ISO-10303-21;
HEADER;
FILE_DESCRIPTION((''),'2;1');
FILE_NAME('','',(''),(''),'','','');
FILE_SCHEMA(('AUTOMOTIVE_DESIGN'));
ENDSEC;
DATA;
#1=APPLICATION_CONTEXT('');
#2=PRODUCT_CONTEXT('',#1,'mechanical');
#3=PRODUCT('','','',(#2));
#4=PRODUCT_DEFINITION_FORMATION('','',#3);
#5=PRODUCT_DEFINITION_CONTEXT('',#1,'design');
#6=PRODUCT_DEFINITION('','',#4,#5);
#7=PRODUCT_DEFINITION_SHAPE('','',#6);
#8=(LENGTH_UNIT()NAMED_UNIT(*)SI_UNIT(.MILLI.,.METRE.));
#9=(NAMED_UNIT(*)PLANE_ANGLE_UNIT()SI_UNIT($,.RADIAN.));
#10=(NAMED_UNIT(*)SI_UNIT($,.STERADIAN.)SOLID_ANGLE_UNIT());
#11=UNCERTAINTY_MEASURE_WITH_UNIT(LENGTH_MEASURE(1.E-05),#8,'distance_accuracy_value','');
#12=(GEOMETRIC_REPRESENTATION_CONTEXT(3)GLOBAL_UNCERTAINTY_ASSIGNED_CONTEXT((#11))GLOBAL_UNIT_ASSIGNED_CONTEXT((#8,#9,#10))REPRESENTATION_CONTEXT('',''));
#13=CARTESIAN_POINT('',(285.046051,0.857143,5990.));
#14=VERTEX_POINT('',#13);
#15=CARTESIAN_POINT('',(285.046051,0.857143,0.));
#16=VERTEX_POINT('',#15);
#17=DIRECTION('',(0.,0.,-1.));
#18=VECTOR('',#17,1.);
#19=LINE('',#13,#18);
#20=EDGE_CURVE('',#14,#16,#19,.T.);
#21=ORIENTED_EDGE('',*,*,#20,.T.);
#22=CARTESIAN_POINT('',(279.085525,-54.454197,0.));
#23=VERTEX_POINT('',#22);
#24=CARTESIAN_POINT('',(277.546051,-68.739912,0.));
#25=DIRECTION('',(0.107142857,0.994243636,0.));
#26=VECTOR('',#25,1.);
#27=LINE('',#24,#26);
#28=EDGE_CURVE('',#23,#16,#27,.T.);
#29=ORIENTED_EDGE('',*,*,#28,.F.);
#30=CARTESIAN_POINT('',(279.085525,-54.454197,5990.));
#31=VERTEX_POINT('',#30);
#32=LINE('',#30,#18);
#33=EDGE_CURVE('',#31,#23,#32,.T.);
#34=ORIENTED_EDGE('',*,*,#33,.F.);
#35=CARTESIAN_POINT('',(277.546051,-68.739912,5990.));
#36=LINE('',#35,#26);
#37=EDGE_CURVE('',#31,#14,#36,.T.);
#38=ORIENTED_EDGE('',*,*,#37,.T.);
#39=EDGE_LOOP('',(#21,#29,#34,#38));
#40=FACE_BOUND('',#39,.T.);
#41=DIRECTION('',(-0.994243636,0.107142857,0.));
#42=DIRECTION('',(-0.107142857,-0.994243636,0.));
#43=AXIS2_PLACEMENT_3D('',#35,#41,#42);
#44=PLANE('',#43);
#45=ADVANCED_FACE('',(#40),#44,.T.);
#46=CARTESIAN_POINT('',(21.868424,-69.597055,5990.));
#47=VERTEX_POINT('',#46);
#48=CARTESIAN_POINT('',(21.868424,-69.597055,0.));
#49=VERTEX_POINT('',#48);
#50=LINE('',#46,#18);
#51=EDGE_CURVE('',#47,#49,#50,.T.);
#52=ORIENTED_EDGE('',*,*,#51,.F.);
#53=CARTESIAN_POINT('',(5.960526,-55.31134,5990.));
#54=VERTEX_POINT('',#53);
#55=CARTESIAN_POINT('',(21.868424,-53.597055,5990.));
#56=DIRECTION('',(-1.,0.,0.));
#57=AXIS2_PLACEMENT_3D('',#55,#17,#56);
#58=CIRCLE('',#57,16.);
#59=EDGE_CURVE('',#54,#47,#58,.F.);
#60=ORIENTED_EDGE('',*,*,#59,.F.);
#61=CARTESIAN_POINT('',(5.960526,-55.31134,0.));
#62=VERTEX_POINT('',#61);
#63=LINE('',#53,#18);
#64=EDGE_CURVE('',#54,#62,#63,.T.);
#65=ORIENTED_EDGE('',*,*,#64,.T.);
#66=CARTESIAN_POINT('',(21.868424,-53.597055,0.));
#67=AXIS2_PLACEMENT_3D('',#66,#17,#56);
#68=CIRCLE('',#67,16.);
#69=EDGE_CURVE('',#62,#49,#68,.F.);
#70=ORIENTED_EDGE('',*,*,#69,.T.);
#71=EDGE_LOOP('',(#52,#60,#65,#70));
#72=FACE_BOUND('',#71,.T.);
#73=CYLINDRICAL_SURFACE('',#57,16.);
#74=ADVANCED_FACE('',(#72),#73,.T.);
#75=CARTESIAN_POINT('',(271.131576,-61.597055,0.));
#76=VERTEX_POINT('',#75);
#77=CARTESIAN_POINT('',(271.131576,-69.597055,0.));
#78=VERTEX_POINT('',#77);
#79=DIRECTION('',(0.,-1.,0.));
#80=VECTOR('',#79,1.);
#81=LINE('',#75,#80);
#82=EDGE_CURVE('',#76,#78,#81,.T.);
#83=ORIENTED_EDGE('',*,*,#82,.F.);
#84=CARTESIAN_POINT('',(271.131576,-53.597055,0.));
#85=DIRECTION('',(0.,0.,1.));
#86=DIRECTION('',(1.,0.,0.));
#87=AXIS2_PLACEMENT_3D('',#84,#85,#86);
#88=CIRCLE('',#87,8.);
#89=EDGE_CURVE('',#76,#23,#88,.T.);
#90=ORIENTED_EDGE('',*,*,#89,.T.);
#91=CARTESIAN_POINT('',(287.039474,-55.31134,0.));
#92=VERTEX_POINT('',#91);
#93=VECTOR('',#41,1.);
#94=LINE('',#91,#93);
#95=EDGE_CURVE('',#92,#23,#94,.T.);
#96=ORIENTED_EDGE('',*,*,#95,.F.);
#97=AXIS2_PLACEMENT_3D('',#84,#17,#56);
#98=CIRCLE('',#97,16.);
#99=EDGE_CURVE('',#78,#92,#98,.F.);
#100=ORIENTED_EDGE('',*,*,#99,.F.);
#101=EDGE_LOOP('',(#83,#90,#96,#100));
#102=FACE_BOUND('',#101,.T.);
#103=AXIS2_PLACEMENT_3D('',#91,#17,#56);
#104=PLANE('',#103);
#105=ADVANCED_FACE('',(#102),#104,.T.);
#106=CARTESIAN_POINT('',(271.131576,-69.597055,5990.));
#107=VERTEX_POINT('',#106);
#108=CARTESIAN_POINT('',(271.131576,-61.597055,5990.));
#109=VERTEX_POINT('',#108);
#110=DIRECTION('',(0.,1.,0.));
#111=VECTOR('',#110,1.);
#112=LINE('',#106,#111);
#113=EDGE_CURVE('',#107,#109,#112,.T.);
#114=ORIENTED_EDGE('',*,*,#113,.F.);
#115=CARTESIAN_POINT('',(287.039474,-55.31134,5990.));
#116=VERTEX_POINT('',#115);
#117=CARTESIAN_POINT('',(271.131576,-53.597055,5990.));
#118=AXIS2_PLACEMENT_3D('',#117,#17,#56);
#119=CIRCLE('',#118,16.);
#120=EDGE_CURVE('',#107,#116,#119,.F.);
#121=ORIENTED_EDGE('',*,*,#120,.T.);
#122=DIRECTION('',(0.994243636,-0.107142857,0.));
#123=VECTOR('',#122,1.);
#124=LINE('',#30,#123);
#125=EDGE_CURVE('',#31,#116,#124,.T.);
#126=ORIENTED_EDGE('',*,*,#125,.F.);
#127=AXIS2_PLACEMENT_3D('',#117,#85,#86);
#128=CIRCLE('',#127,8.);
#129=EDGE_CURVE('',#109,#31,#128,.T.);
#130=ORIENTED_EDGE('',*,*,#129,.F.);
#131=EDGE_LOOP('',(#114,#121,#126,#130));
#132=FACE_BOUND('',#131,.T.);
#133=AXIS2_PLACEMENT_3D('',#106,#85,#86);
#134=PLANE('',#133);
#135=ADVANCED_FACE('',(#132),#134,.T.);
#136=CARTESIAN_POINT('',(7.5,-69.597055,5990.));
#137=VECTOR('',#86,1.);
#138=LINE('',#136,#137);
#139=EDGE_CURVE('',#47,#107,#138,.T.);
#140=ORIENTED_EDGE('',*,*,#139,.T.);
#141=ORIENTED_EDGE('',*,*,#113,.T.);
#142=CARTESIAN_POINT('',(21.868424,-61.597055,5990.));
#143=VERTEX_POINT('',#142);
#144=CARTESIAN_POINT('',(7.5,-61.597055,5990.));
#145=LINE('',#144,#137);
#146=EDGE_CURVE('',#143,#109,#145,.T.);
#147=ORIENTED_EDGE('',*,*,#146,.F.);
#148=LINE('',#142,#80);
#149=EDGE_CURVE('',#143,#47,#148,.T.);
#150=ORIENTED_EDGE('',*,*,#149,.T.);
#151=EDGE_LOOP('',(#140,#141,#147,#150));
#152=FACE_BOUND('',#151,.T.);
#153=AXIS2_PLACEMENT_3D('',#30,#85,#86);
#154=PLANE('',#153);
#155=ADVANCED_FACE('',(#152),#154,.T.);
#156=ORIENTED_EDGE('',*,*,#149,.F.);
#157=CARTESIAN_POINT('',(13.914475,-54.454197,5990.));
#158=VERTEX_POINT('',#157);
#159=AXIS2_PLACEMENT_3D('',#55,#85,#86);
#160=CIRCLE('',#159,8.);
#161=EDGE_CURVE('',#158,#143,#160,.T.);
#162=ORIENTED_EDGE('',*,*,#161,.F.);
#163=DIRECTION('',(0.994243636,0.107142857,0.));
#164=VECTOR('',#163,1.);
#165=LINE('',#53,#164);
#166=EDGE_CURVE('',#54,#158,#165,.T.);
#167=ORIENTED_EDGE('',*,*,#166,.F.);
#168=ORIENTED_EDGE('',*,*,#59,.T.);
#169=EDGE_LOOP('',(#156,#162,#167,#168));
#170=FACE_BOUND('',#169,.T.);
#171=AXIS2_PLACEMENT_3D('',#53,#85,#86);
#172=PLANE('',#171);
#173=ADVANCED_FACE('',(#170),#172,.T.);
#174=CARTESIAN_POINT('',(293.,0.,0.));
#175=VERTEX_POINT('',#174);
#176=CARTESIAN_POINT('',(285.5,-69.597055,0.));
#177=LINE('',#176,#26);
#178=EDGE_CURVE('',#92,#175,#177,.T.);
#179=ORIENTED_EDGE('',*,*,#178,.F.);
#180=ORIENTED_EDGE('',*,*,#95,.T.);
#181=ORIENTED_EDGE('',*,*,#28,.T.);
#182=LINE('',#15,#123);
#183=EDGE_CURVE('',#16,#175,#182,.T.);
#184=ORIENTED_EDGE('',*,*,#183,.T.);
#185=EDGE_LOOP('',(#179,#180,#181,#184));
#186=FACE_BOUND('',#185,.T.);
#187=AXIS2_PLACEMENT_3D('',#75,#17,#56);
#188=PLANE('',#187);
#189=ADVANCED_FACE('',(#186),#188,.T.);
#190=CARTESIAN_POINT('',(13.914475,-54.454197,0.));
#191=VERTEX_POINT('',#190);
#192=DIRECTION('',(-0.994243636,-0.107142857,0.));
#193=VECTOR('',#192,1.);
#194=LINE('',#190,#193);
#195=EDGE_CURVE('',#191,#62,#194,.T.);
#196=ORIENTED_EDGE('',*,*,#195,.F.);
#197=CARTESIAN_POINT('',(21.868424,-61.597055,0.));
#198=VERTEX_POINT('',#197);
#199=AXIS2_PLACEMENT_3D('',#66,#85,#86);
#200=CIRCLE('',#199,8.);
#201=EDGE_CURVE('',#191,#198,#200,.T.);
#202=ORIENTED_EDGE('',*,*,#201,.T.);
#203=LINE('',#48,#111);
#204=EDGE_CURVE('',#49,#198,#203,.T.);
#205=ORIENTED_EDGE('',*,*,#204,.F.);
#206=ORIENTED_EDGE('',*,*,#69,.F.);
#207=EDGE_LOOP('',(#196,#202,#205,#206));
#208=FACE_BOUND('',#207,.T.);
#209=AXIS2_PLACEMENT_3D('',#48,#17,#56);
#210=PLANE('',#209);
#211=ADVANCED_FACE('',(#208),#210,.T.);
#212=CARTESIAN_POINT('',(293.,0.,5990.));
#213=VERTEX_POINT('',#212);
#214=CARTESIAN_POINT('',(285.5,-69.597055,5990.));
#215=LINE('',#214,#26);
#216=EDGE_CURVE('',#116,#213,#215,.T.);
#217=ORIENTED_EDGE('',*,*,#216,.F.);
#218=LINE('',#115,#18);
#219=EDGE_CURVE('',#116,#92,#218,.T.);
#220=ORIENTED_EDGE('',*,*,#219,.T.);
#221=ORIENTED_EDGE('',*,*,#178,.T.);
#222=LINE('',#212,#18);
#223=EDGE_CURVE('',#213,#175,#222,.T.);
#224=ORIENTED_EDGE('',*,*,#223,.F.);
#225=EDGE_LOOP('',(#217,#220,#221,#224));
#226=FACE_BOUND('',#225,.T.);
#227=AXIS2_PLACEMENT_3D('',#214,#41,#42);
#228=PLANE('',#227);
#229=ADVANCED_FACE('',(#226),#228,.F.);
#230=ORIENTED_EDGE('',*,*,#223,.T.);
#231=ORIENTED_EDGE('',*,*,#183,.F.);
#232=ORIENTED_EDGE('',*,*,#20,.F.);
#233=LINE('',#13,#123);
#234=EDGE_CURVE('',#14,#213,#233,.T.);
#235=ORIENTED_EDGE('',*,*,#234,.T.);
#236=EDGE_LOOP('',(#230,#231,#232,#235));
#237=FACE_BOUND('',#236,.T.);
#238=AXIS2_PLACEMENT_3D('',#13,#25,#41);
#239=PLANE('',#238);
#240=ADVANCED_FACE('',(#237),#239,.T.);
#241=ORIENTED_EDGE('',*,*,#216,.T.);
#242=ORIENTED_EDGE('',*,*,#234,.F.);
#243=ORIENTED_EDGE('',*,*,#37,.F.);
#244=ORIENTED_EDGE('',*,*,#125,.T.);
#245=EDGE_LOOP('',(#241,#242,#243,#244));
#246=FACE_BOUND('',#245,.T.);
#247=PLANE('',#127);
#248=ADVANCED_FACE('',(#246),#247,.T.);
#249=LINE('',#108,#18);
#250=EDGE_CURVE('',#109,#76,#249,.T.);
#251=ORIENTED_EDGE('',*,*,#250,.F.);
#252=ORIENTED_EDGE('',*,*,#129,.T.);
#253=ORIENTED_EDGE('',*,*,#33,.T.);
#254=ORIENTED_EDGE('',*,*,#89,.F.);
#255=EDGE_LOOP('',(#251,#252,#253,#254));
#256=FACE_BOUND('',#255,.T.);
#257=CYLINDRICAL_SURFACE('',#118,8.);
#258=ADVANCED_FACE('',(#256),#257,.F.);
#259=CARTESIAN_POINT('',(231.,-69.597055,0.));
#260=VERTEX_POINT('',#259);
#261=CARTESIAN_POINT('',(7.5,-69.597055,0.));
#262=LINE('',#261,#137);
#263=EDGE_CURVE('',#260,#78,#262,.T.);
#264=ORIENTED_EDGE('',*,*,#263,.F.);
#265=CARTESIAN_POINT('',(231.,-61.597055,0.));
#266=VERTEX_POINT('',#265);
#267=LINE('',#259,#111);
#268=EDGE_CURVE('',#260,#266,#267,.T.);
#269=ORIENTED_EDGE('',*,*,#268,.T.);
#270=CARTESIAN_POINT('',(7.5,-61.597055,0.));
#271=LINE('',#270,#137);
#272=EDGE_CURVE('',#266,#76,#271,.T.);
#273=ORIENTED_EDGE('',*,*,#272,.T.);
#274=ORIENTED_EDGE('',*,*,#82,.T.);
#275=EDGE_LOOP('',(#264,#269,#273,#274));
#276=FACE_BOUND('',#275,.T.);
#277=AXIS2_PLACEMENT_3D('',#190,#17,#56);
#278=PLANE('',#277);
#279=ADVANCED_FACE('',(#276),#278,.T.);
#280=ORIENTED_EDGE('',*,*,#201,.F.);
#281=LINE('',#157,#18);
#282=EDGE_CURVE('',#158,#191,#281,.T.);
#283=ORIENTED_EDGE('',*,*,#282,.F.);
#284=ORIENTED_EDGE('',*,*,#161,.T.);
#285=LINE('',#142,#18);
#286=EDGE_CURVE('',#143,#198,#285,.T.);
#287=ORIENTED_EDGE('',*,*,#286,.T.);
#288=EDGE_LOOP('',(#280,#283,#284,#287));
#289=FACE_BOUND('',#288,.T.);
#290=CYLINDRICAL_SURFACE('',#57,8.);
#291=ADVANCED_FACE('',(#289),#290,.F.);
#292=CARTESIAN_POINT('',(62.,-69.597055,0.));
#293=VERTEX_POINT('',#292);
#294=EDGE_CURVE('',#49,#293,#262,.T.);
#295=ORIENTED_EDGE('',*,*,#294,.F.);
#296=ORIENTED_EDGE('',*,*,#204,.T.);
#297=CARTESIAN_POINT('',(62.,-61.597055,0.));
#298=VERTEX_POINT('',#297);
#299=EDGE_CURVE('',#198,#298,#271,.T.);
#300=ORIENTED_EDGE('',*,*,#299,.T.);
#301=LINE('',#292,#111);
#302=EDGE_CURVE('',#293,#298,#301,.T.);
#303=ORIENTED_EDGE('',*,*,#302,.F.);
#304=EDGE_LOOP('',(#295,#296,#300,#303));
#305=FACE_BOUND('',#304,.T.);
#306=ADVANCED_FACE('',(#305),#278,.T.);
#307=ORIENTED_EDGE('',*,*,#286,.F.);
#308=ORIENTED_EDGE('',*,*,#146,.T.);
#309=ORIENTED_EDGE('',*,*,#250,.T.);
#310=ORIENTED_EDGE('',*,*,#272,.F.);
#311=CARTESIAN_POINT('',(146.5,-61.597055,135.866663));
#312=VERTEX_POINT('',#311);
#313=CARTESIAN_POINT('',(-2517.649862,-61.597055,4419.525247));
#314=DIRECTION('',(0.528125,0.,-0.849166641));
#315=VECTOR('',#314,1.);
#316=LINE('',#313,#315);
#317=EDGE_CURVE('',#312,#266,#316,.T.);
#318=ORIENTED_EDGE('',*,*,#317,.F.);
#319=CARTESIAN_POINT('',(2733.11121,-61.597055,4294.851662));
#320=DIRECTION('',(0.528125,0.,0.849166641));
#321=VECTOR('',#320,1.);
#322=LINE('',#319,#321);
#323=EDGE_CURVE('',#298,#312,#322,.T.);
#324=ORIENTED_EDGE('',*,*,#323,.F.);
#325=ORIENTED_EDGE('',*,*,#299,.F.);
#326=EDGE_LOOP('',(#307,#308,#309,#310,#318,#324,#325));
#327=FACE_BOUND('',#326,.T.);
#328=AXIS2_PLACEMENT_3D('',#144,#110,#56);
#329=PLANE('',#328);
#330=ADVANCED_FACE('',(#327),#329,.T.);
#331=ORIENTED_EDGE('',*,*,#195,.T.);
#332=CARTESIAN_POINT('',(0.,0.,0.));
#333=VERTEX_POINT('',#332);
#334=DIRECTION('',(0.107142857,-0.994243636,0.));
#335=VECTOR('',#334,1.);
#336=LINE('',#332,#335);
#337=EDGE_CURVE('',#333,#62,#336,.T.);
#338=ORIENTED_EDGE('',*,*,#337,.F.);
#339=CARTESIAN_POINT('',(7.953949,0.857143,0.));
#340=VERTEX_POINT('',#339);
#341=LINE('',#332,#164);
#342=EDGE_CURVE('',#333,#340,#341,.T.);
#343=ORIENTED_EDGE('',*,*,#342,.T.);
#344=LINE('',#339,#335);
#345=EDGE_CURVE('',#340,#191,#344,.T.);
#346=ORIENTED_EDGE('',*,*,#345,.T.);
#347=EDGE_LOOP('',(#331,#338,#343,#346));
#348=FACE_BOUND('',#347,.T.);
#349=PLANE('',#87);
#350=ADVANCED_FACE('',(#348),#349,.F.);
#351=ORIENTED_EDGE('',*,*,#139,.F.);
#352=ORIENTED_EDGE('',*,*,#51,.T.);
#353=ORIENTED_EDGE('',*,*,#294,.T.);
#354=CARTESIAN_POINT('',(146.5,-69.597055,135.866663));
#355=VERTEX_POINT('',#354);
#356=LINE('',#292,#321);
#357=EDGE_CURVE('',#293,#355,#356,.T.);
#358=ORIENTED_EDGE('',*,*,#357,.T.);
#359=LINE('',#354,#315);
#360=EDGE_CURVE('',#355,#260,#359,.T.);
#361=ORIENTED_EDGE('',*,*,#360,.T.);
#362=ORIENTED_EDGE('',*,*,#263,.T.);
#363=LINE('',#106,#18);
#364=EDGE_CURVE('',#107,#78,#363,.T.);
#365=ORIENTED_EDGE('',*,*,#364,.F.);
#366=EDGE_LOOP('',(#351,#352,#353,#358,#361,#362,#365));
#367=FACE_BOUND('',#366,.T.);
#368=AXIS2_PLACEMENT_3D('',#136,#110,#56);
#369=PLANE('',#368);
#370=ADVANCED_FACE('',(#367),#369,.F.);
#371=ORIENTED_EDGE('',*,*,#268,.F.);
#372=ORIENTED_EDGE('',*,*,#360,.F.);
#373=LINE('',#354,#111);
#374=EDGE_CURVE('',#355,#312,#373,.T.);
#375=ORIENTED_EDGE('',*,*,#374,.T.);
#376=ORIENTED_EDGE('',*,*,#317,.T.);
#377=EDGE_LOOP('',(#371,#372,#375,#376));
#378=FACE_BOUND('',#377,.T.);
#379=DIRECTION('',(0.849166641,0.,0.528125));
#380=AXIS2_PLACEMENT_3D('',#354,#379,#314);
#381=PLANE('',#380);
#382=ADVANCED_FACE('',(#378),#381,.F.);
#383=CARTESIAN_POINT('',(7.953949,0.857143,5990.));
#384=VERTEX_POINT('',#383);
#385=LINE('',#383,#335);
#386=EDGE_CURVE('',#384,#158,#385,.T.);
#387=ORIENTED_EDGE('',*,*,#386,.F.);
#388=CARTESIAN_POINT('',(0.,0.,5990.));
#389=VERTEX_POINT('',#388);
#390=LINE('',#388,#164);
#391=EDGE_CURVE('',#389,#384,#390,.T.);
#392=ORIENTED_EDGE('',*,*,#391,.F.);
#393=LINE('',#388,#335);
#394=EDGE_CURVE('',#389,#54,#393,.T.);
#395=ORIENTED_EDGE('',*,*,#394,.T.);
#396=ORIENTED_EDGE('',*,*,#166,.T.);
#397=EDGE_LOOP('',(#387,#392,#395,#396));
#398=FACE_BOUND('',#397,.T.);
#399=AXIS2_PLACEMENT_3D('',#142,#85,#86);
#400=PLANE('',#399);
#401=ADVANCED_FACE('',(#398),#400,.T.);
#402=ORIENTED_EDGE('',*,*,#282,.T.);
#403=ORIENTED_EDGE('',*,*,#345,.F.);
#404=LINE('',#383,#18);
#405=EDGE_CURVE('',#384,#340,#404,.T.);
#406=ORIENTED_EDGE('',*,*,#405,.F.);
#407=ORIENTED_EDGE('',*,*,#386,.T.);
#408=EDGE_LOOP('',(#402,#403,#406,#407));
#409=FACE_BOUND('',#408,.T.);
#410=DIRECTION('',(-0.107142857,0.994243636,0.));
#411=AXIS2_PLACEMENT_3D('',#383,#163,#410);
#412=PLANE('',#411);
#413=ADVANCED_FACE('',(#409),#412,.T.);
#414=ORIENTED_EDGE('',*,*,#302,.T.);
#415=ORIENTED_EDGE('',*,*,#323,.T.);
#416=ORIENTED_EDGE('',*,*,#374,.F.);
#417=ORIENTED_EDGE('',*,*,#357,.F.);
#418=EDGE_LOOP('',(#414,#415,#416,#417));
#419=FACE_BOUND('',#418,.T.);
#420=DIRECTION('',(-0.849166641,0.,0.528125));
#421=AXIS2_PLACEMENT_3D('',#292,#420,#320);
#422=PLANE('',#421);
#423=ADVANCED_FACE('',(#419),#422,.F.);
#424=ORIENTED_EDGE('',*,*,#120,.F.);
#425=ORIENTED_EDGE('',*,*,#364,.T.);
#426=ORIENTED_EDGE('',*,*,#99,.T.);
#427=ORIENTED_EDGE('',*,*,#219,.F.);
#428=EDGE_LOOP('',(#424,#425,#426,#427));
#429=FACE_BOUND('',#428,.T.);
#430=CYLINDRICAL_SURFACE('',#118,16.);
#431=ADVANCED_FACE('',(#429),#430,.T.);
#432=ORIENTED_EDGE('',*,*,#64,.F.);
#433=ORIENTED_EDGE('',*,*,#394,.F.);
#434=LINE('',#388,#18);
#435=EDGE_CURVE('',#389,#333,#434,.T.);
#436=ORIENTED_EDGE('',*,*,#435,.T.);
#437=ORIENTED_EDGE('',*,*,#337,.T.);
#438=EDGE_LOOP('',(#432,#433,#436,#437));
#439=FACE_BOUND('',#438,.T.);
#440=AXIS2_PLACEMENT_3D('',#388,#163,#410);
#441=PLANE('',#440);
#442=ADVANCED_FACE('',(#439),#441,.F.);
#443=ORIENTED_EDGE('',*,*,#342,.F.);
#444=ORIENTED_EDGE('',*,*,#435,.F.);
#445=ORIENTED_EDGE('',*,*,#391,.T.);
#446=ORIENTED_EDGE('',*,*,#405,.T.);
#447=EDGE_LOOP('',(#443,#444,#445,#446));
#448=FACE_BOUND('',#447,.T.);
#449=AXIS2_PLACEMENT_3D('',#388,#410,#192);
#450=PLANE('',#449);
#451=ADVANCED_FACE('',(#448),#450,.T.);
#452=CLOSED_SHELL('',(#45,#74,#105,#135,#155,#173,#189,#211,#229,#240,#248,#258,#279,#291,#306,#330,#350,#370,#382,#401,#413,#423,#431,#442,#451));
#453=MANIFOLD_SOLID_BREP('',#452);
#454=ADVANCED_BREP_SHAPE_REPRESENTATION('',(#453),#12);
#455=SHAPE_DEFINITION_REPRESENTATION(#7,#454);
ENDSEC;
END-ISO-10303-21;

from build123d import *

# Parameters (mm, degrees)
TABAN_FLAN_1_DEPTH         = 5990
KES_EKSTR_ZYON1_DEPTH      = 5998.486934273
KES_EKSTR_ZYON1_DEPTH_BACK = 5998.486934273


# Sheet-metal steps are written as plain solids
with BuildPart() as part:
    # Çizim1 → Taban-Flanş1 (new body)
    with BuildSketch(Plane.XY):
        with BuildLine():
            Line((0, 0), (5.960525983, -55.31134025))
            ThreePointArc((5.960525983, -55.31134025), (11.177974486, -65.501435482), (21.868424162, -69.597054535))
            Line((21.868424162, -69.597054535), (271.131575838, -69.597054535))
            ThreePointArc((271.131575838, -69.597054535), (281.822025514, -65.501435482), (287.039474017, -55.31134025))
            Line((287.039474017, -55.31134025), (293, 0))
            Line((293, 0), (285.04605091, 0.857142857))
            Line((285.04605091, 0.857142857), (279.085524928, -54.454197393))
            ThreePointArc((279.085524928, -54.454197393), (276.476800676, -59.549245009), (271.131575838, -61.597054535))
            Line((271.131575838, -61.597054535), (21.868424162, -61.597054535))
            ThreePointArc((21.868424162, -61.597054535), (16.523199324, -59.549245009), (13.914475072, -54.454197393))
            Line((13.914475072, -54.454197393), (7.95394909, 0.857142857))
            Line((7.95394909, 0.857142857), (0, 0))
        make_face()
    extrude(amount=TABAN_FLAN_1_DEPTH)

    # Çizim6 → Kes-Ekstrüzyon1 (cut, two sides: drawn at the far end of the back side and taken through both)
    with BuildSketch(Plane(origin=(0, -61.597054535, 0), x_dir=(1, 0, 0), z_dir=(0, 1, 0)).offset(-KES_EKSTR_ZYON1_DEPTH_BACK)):
        Polygon((62, 0), (146.5, -135.866662578), (231, 0), (231, 53.477890067), (62, 53.477890067), align=None)
    extrude(amount=KES_EKSTR_ZYON1_DEPTH + KES_EKSTR_ZYON1_DEPTH_BACK, mode=Mode.SUBTRACT)


solid = part.part
